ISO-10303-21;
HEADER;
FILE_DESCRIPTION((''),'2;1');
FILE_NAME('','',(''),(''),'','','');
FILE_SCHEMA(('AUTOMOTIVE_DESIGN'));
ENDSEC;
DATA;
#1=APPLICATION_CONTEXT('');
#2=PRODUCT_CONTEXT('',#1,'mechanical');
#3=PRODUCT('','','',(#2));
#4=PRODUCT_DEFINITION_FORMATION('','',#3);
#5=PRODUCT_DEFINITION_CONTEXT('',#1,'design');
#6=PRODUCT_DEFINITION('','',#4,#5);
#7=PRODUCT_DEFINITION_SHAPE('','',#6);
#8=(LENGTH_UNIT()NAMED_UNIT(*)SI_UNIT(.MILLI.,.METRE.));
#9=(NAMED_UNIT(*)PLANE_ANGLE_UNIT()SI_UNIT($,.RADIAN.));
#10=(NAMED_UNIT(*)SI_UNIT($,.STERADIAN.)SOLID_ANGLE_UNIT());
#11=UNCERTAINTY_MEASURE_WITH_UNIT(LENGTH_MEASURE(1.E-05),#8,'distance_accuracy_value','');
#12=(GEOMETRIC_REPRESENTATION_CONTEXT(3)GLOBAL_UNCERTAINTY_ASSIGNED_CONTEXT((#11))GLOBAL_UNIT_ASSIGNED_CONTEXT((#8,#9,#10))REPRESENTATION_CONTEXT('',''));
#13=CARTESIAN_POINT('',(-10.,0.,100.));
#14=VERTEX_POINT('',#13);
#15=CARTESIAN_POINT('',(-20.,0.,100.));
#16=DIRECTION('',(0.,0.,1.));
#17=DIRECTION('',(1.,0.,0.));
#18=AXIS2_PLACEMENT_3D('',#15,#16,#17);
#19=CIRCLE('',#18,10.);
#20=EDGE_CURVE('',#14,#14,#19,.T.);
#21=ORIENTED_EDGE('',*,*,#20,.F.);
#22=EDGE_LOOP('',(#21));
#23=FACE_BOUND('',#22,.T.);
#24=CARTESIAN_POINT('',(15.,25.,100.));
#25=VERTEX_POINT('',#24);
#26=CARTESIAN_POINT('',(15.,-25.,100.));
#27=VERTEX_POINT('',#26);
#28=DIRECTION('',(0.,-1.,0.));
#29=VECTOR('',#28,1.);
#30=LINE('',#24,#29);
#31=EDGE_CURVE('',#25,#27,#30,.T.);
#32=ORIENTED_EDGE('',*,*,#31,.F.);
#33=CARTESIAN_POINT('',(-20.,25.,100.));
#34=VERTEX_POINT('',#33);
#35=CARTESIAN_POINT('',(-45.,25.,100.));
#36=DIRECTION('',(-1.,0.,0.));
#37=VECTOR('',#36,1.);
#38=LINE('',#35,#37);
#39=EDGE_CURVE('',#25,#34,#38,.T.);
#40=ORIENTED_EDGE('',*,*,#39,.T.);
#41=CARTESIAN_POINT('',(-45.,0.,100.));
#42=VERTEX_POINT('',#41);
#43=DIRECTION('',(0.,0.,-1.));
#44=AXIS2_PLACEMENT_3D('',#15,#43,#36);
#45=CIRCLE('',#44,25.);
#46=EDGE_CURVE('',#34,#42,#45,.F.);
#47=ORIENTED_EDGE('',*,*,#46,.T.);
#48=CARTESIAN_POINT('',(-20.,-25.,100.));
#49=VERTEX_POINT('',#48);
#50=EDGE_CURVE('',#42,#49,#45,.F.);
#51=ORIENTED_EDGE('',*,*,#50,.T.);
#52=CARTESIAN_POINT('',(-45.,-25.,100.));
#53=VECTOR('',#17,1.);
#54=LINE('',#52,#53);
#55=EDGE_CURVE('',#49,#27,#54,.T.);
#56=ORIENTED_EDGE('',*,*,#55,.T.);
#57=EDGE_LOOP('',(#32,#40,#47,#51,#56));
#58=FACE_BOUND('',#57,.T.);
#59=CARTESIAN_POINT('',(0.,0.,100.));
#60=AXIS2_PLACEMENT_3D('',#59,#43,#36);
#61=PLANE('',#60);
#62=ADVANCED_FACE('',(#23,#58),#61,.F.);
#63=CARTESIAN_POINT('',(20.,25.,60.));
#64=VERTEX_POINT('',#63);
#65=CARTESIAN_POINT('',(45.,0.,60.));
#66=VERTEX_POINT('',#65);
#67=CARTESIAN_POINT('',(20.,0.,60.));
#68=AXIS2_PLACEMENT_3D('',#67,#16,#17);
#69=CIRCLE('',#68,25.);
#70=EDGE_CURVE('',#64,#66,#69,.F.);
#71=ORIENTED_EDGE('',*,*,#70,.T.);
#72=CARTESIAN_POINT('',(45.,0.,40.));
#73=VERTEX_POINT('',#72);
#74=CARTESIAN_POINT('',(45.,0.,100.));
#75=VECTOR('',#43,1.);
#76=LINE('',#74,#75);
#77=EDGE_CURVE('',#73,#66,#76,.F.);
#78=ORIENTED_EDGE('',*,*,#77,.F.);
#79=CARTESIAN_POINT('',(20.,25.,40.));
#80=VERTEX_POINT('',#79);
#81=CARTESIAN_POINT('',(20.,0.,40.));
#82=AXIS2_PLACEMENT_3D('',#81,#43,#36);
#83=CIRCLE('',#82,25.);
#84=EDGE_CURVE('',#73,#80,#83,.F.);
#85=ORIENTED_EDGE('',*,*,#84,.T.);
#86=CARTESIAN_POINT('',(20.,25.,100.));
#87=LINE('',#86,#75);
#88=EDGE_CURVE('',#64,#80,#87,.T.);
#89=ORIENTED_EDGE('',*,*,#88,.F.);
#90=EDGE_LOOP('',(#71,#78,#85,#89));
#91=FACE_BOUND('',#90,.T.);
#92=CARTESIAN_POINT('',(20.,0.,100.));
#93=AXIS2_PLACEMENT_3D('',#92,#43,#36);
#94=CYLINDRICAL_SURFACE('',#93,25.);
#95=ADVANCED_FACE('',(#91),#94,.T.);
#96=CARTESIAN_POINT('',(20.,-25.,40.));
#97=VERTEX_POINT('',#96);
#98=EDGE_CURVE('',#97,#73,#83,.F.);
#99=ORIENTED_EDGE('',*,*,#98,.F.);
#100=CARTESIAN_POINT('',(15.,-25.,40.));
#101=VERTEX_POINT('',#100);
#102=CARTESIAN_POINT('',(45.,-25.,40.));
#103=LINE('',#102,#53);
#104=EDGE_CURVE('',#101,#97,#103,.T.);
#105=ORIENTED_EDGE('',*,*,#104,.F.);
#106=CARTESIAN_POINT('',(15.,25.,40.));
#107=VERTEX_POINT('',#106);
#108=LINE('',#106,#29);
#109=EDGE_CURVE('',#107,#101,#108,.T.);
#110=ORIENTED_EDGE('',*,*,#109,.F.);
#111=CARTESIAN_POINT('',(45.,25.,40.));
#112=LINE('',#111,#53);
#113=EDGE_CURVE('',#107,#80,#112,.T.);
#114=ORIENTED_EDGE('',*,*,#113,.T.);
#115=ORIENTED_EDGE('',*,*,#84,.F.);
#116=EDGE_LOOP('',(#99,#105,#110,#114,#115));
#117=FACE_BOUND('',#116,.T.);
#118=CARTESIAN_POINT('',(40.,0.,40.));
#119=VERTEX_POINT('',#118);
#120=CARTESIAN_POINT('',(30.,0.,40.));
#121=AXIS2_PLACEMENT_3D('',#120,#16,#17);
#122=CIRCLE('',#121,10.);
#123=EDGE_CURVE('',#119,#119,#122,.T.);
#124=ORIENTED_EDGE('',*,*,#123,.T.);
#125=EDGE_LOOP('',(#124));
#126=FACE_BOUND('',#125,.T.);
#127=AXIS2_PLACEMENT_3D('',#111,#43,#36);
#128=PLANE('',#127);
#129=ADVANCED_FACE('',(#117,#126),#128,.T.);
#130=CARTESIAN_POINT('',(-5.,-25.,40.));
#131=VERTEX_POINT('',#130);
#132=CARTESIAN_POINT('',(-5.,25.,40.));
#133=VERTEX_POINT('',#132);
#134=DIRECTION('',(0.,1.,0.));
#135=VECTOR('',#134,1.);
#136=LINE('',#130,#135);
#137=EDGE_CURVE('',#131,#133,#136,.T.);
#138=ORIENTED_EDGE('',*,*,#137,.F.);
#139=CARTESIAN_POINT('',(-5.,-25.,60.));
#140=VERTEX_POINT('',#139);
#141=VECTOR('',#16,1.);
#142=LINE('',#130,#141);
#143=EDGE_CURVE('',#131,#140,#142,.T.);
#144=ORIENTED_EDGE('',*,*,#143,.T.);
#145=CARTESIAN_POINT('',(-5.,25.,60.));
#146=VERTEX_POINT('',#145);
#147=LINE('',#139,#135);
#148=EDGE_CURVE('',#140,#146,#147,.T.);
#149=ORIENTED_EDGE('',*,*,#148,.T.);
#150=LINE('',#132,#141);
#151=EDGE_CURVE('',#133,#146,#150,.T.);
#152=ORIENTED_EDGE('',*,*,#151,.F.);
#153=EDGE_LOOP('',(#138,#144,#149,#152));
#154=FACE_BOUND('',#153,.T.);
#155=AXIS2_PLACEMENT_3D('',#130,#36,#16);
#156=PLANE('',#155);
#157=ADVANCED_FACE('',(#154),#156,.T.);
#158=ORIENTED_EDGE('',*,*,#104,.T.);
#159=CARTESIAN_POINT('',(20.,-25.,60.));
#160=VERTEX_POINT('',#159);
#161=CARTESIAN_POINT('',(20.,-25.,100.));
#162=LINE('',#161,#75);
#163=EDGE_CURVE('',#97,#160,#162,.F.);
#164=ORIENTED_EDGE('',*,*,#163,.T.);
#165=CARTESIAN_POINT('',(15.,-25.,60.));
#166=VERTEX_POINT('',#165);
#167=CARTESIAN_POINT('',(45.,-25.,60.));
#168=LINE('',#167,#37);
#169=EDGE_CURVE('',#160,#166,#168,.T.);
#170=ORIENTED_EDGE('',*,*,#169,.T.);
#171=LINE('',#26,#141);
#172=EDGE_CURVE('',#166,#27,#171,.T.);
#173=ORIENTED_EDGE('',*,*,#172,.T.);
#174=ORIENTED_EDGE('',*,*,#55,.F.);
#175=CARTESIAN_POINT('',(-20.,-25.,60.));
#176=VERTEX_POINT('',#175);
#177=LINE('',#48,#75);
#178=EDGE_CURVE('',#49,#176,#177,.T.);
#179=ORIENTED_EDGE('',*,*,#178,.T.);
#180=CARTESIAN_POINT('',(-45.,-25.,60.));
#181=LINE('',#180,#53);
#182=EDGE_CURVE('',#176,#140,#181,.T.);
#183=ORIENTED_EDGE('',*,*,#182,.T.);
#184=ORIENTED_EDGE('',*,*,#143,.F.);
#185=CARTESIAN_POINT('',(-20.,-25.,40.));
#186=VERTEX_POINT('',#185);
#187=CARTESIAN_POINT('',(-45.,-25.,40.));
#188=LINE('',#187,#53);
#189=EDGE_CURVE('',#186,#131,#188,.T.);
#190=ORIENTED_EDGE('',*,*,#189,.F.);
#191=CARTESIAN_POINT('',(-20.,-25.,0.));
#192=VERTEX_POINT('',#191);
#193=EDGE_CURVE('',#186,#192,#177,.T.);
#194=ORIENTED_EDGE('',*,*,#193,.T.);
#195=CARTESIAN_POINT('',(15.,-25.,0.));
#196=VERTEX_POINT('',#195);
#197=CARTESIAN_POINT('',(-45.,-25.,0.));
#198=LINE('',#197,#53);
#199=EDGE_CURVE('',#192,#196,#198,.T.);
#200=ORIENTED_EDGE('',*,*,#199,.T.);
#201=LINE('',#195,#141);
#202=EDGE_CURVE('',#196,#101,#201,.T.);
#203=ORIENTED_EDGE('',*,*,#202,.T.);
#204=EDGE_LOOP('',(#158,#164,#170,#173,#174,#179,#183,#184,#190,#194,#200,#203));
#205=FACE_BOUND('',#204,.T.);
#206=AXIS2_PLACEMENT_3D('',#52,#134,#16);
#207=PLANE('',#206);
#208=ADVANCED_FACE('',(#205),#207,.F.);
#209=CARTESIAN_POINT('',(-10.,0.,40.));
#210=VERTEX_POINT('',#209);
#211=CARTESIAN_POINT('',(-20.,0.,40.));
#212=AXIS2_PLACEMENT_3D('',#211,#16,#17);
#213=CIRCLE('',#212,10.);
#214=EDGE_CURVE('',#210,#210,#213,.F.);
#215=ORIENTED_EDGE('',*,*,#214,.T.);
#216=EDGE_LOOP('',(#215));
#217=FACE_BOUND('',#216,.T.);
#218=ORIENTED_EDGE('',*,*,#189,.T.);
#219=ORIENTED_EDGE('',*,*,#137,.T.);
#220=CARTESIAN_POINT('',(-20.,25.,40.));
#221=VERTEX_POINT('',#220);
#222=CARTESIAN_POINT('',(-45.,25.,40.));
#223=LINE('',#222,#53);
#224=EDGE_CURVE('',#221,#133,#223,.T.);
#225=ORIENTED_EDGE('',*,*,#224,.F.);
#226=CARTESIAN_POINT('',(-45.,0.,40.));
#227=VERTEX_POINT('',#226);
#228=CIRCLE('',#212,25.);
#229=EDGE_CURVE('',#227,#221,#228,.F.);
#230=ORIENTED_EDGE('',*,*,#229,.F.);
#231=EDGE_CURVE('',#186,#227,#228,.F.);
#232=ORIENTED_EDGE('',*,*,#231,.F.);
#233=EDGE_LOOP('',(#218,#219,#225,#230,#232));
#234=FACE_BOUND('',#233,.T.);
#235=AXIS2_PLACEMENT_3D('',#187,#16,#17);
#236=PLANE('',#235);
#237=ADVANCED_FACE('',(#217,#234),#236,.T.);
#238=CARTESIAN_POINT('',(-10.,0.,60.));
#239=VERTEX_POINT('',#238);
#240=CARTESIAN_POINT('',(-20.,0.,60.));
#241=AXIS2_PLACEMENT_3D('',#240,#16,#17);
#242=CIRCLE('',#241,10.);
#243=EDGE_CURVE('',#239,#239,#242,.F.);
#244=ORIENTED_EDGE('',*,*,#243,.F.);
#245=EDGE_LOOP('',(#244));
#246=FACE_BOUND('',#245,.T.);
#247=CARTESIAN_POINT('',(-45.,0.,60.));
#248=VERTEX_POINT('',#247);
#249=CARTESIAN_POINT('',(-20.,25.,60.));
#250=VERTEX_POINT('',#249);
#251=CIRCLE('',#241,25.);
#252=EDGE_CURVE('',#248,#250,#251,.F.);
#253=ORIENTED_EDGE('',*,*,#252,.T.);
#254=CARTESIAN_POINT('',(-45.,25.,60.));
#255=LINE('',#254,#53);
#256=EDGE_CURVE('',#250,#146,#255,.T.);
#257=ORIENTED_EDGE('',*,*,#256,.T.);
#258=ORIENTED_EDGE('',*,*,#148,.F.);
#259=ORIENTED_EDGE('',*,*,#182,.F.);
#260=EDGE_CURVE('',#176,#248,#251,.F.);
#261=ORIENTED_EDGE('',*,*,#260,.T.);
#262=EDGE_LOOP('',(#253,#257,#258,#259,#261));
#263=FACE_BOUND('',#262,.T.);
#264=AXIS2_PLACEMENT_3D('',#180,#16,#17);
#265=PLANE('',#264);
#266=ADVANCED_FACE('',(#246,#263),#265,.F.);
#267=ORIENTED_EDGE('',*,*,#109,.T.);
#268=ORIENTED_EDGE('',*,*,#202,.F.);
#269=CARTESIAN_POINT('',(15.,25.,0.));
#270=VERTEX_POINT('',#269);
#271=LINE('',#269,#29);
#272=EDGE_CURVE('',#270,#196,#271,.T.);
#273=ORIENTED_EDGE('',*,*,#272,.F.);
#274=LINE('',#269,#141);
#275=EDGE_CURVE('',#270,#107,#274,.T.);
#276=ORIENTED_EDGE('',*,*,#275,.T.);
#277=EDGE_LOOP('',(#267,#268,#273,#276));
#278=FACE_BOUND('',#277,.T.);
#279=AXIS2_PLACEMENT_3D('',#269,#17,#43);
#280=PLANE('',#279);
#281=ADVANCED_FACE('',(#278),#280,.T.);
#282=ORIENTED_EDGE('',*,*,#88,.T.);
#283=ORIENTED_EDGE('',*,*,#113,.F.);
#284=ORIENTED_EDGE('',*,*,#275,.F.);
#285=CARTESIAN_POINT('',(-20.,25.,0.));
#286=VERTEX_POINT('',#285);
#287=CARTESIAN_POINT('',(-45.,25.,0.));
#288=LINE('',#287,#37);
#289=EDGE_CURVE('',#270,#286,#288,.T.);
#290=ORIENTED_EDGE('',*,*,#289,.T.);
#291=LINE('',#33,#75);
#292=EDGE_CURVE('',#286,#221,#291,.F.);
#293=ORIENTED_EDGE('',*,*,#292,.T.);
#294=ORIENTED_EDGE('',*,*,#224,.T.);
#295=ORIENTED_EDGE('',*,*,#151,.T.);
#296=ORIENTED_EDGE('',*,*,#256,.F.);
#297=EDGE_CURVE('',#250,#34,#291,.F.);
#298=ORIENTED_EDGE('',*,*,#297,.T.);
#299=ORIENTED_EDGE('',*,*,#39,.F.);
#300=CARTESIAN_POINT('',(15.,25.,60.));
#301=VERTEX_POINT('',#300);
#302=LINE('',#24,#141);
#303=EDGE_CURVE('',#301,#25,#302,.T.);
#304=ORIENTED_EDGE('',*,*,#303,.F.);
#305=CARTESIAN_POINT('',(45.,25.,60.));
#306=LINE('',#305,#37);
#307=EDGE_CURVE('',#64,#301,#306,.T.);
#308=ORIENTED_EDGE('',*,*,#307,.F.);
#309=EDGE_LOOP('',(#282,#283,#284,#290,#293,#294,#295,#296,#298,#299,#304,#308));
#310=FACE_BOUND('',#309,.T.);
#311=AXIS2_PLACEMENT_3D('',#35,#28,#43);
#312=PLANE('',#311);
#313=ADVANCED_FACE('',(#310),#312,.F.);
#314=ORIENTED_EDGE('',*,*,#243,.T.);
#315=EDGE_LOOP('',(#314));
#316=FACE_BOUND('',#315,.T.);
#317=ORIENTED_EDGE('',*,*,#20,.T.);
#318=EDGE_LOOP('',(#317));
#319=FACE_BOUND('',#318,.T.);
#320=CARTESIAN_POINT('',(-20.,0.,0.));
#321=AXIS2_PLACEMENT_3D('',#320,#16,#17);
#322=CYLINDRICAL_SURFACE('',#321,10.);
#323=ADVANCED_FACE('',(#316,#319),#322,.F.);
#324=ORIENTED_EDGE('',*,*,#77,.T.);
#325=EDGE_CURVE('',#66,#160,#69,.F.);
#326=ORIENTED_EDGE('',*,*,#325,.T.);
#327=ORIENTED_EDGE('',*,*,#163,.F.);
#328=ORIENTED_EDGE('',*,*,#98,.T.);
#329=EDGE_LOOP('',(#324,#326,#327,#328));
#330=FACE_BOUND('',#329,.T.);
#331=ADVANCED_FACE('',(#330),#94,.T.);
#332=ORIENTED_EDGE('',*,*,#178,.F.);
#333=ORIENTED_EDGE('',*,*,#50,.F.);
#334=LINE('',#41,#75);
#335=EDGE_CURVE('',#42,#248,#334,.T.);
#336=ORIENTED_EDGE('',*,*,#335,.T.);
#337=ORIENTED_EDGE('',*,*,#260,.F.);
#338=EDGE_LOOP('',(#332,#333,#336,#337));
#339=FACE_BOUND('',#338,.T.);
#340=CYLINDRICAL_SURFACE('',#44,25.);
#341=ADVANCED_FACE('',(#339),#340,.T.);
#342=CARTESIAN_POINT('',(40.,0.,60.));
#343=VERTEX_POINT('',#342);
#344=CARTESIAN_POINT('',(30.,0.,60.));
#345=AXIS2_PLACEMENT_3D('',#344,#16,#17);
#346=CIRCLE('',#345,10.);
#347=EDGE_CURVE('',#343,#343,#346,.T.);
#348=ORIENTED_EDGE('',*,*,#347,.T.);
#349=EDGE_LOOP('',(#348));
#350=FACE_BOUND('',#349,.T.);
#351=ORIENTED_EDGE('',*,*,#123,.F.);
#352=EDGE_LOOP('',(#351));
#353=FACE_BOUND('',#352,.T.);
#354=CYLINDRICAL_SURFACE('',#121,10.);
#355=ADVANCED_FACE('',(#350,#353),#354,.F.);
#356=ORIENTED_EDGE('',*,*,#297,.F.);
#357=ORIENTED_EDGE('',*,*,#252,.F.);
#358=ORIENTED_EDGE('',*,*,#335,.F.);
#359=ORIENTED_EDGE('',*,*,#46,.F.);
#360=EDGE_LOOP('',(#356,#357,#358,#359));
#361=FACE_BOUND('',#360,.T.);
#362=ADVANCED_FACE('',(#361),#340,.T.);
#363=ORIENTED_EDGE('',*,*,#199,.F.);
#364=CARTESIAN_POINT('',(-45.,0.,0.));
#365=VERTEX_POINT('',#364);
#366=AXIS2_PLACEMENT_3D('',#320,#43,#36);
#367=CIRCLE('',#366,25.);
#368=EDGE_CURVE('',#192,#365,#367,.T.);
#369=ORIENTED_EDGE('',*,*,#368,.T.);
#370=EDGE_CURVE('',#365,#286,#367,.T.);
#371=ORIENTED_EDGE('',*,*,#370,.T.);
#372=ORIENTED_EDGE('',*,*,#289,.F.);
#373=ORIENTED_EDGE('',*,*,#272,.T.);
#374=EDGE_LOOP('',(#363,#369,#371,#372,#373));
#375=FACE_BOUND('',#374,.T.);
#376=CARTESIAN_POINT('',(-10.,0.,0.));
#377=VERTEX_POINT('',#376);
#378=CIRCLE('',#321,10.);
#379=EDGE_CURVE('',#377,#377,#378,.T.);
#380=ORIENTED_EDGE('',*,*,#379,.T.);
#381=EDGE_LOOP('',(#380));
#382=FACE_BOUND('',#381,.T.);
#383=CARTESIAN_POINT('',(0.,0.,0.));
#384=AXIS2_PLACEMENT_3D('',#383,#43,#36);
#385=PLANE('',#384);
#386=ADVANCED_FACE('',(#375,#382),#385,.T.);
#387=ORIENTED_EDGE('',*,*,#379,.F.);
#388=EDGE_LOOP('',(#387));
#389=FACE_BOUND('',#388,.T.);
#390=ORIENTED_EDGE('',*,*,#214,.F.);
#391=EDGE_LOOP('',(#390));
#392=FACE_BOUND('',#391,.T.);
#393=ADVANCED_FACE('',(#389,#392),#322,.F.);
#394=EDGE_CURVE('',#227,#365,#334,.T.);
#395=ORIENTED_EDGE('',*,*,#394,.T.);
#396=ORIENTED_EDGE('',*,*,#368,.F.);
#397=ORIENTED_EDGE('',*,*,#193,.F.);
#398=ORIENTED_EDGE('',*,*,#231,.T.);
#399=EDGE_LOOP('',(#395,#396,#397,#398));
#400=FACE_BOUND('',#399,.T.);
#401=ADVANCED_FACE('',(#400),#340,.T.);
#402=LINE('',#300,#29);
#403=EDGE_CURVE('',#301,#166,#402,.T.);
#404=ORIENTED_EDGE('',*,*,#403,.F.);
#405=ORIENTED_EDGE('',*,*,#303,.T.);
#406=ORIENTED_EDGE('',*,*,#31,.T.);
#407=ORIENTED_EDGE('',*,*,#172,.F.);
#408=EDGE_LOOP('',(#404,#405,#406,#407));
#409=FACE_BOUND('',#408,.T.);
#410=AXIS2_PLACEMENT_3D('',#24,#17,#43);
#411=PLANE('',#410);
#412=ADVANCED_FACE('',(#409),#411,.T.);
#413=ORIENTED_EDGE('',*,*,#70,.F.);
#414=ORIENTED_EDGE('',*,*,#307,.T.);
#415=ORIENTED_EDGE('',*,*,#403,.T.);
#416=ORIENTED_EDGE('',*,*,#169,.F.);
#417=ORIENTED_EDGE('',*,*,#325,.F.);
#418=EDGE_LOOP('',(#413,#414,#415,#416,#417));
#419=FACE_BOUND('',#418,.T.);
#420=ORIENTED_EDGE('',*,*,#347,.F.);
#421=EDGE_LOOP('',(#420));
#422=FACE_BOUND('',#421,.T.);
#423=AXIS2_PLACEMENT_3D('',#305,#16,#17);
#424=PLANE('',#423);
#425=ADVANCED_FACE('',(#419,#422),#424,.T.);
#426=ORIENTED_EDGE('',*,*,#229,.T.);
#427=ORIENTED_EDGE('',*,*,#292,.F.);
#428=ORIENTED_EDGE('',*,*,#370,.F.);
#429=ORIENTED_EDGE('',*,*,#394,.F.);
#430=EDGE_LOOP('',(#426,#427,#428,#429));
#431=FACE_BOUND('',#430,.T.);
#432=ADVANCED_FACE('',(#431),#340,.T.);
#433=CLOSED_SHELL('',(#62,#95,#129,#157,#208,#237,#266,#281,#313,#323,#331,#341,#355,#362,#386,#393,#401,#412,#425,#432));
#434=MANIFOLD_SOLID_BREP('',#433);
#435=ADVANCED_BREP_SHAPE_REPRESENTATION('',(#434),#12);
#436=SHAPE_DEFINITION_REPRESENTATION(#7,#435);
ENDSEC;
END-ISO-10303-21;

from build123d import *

# Parameters (mm, degrees)
CROQUIS1_W                 = 90
CROQUIS1_H                 = 50
SALIENTE_EXTRUIR1_DEPTH    = 100
REDONDEO1_R                = 25
CORTAR_EXTRUIR1_DEPTH      = 25
CORTAR_EXTRUIR1_DEPTH_BACK = 25
CROQUIS2_W                 = 30
CROQUIS2_H                 = 40
CROQUIS4_R                 = 10
CORTAR_EXTRUIR2_DEPTH      = 100
CROQUIS3_W                 = 40
CROQUIS3_H                 = 20
CORTAR_EXTRUIR3_DEPTH      = 50
CROQUIS5_R                 = 10
CORTAR_EXTRUIR4_DEPTH      = 20


with BuildPart() as part:
    # Croquis1 → Saliente-Extruir1 (new body)
    with BuildSketch(Plane.XY):
        Rectangle(CROQUIS1_W, CROQUIS1_H)
    extrude(amount=SALIENTE_EXTRUIR1_DEPTH)

    # Redondeo1
    redondeo1_edges = [part.edges().sort_by_distance(p)[0] for p in [
        (45, -25, 50),
        (45, 25, 50),
        (-45, -25, 50),
        (-45, 25, 50),
    ]]
    fillet(redondeo1_edges, radius=REDONDEO1_R - 0.0001)  # a hair under: the kernel refuses the full size

    # Croquis2 → Cortar-Extruir1 (cut, two sides: drawn at the far end of the back side and taken through both)
    with BuildSketch(Plane(origin=(0, 0, 0), x_dir=(1, 0, 0), z_dir=(0, 1, 0)).offset(-CORTAR_EXTRUIR1_DEPTH_BACK)):
        with Locations((30, -20)):
            Rectangle(CROQUIS2_W, CROQUIS2_H)
        with Locations((30, -80)):
            Rectangle(CROQUIS2_W, CROQUIS2_H)
    extrude(amount=CORTAR_EXTRUIR1_DEPTH + CORTAR_EXTRUIR1_DEPTH_BACK, mode=Mode.SUBTRACT)

    # Croquis4 → Cortar-Extruir2 (cut)
    with BuildSketch(Plane.XY.offset(100)):
        with Locations((-20, 0)):
            Circle(CROQUIS4_R)
    extrude(amount=-CORTAR_EXTRUIR2_DEPTH, mode=Mode.SUBTRACT)

    # Croquis3 → Cortar-Extruir3 (cut)
    with BuildSketch(Plane(origin=(0, 25, 0), x_dir=(1, 0, 0), z_dir=(0, 1, 0))):
        with Locations((-25, -50)):
            Rectangle(CROQUIS3_W, CROQUIS3_H)
    extrude(amount=-CORTAR_EXTRUIR3_DEPTH, mode=Mode.SUBTRACT)

    # Croquis5 → Cortar-Extruir4 (cut)
    with BuildSketch(Plane.XY.offset(60)):
        with Locations((30, 0)):
            Circle(CROQUIS5_R)
    extrude(amount=-CORTAR_EXTRUIR4_DEPTH, mode=Mode.SUBTRACT)


solid = part.part
